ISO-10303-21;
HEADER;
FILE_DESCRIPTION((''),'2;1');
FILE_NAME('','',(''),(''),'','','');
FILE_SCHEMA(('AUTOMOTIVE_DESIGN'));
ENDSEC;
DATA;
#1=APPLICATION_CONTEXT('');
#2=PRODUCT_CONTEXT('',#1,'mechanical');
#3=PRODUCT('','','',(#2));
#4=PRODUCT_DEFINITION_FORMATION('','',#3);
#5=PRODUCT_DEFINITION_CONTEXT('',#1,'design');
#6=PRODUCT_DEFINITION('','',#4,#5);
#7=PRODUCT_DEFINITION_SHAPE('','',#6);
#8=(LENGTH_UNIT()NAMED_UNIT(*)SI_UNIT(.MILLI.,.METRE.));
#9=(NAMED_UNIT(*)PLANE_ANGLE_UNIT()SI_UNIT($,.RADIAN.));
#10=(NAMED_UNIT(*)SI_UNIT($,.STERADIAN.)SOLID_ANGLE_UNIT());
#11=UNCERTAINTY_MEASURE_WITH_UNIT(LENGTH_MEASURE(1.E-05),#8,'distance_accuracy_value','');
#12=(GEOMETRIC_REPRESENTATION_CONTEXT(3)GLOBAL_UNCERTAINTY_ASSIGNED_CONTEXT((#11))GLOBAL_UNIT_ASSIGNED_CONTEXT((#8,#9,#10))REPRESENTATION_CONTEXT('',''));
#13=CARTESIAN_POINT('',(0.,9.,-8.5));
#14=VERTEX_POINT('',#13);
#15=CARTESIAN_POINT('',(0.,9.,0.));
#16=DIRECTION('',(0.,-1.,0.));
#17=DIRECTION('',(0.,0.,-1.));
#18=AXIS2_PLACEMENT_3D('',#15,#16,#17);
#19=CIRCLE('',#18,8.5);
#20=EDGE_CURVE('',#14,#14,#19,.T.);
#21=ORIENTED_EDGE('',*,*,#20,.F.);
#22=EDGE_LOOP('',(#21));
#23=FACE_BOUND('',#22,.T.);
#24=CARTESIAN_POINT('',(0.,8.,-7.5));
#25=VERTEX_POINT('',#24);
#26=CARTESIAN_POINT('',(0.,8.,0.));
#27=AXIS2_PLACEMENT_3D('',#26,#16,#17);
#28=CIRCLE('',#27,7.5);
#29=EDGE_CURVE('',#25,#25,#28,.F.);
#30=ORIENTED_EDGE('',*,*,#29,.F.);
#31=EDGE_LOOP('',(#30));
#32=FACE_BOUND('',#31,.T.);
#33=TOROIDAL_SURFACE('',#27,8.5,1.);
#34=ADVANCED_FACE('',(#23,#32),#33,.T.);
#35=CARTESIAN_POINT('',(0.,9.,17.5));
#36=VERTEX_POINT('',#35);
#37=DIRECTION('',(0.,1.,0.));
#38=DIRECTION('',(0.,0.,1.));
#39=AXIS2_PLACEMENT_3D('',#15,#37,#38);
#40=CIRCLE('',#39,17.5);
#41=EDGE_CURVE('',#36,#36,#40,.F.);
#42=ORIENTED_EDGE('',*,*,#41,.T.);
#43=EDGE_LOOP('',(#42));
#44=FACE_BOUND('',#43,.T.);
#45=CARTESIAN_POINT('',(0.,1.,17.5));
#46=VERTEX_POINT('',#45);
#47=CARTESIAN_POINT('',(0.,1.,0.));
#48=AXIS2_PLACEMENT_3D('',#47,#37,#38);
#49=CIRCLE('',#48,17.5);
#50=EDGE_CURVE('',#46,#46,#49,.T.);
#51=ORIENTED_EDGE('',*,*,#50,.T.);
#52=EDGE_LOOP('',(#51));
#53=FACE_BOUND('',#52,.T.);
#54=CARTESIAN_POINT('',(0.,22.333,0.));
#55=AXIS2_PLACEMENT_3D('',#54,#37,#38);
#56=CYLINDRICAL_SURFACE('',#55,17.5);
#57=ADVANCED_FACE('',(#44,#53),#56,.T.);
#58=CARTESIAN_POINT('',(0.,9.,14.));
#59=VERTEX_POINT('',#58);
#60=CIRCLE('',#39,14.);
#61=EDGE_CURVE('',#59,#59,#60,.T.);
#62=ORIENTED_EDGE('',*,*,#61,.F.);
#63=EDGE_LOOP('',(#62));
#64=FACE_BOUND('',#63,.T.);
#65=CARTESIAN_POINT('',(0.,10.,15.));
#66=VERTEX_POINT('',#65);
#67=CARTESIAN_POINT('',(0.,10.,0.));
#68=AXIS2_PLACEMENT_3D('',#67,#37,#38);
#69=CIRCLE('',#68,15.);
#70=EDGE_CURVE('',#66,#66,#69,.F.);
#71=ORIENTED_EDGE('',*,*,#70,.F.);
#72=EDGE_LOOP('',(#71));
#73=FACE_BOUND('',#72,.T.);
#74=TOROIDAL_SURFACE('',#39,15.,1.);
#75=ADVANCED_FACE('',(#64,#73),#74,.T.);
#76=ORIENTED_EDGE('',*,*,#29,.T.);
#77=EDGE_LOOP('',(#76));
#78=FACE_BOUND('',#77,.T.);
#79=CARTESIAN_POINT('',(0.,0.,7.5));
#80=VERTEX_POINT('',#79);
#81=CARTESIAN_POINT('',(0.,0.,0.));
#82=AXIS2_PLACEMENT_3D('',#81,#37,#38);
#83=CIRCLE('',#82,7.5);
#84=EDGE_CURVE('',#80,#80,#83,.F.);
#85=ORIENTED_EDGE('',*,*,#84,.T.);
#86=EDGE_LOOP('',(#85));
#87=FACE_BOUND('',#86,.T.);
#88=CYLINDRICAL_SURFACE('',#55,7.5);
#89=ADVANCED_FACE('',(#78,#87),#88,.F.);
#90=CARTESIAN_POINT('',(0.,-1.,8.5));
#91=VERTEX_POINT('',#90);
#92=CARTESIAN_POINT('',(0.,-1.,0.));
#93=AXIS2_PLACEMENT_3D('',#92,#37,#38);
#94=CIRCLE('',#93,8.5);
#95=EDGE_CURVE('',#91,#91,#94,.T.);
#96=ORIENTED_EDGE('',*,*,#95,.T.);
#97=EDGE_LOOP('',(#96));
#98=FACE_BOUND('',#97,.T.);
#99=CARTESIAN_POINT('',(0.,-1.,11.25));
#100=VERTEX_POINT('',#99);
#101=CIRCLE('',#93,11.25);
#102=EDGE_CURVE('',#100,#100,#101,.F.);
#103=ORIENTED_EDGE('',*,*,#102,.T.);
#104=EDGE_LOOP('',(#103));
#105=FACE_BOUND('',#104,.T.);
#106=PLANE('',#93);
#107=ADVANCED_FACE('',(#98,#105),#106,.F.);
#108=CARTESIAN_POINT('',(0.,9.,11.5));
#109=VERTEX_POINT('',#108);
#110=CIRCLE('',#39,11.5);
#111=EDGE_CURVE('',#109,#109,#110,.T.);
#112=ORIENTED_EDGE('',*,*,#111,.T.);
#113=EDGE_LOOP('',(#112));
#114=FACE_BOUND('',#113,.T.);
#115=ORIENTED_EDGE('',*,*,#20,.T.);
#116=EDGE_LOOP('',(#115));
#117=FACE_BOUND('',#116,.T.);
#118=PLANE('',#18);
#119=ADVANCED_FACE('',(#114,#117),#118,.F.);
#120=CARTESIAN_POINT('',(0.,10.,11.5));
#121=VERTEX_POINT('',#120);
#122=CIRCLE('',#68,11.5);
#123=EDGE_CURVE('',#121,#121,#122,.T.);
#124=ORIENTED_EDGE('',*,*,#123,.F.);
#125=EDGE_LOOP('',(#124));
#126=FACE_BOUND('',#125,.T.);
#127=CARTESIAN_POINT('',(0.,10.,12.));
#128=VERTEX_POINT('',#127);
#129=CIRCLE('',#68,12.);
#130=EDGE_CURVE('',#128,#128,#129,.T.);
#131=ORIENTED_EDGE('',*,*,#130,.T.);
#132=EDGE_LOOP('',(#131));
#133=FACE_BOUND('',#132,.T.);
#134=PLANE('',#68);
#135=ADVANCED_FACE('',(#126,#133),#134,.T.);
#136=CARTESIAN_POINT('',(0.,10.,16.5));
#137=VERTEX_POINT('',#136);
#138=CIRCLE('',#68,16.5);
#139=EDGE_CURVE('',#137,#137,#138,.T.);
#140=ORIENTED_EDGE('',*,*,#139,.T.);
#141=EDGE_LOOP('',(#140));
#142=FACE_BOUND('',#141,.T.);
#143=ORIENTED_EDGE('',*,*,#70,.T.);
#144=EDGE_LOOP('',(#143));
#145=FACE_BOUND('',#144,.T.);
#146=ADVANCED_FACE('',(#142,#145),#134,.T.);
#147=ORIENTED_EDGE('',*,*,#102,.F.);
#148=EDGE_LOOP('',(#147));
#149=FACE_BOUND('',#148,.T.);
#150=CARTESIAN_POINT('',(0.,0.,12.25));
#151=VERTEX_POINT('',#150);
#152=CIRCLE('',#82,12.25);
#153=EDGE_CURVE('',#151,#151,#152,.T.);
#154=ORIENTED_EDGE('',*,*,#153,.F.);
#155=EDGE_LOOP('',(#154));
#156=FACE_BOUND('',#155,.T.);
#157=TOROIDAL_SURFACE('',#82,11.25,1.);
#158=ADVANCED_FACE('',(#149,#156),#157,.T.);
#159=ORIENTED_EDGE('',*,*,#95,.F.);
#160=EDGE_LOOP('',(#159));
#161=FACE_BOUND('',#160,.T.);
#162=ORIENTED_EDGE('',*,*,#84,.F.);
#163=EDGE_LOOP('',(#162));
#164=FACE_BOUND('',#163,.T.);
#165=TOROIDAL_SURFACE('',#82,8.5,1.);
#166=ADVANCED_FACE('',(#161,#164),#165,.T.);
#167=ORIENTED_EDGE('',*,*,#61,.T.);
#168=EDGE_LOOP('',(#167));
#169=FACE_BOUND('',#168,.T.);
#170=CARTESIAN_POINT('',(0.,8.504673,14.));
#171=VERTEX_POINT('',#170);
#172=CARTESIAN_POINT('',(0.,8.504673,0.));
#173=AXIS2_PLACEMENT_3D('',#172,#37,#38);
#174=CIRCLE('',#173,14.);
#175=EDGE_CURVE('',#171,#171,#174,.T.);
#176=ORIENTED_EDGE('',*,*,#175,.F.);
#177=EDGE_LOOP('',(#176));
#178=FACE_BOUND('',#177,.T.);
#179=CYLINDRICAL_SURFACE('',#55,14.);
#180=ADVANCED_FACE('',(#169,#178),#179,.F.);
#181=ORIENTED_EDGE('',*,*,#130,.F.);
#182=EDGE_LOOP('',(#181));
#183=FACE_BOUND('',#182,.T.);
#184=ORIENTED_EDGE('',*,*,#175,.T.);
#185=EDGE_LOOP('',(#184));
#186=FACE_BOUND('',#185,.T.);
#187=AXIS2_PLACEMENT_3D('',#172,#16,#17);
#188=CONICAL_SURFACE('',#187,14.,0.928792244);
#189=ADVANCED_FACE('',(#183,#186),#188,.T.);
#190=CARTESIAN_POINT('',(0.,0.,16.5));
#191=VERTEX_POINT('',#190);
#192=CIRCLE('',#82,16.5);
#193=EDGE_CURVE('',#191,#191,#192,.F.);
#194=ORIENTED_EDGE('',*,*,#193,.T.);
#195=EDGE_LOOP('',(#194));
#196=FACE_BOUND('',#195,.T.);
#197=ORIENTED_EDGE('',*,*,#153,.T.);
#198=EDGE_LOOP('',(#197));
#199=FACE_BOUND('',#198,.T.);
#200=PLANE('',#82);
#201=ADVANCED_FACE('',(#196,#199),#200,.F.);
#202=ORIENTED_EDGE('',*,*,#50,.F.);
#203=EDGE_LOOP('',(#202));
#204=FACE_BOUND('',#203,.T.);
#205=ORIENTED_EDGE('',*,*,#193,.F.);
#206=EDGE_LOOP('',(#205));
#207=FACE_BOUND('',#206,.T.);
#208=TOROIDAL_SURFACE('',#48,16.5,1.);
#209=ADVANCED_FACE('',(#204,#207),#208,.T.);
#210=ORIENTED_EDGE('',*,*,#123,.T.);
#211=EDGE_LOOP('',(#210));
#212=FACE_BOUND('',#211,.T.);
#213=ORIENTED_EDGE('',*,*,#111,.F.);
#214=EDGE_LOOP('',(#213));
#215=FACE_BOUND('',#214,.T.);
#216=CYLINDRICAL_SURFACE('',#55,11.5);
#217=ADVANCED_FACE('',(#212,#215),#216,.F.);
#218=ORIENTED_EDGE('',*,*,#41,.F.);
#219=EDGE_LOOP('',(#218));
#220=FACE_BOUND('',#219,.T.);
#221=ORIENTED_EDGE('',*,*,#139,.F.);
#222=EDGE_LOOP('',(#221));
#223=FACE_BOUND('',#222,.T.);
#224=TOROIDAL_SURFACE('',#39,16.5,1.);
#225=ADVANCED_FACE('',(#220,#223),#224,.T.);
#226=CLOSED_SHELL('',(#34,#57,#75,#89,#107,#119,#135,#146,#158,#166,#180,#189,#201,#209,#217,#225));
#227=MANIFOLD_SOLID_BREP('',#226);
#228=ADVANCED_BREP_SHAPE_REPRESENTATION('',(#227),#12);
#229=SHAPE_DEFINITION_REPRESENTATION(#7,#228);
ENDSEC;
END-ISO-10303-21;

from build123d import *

# Parameters (mm, degrees)
CROQUIS1_W  = 4.75
CROQUIS1_H  = 1
REDONDEO1_R = 1
REDONDEO2_R = 1


with BuildPart() as part:
    # Croquis1 → Revolución1 (revolve)
    with BuildSketch(Plane.XY, mode=Mode.PRIVATE) as revoluci_n1_sk:
        Polygon((17.5, 10), (14, 10), (14, 8.504672962), (12, 10), (11.5, 10), (11.5, 9), (7.5, 9), (7.5, 0), (12.25, 0), (17.5, 0), align=None)
        with Locations((9.875, -0.5)):
            Rectangle(CROQUIS1_W, CROQUIS1_H)
    revolve(revoluci_n1_sk.sketch.rotate(Axis((0, 22.332999614, 0), (0, -1, 0)), 90), axis=Axis((0, 22.332999614, 0), (0, -1, 0)))

    # Redondeo1
    redondeo1_edges = [part.edges().sort_by_distance(p)[0] for p in [
        (0, 10, -17.5),
        (0, 0, -17.5),
    ]]
    fillet(redondeo1_edges, radius=REDONDEO1_R)

    # Redondeo2
    redondeo2_edges = [part.edges().sort_by_distance(p)[0] for p in [
        (0, 10, -14),
        (0, -1, -12.25),
        (0, -1, -7.5),
        (0, 9, -7.5),
    ]]
    fillet(redondeo2_edges, radius=REDONDEO2_R - 0.0001)  # a hair under: the kernel refuses the full size


solid = part.part
